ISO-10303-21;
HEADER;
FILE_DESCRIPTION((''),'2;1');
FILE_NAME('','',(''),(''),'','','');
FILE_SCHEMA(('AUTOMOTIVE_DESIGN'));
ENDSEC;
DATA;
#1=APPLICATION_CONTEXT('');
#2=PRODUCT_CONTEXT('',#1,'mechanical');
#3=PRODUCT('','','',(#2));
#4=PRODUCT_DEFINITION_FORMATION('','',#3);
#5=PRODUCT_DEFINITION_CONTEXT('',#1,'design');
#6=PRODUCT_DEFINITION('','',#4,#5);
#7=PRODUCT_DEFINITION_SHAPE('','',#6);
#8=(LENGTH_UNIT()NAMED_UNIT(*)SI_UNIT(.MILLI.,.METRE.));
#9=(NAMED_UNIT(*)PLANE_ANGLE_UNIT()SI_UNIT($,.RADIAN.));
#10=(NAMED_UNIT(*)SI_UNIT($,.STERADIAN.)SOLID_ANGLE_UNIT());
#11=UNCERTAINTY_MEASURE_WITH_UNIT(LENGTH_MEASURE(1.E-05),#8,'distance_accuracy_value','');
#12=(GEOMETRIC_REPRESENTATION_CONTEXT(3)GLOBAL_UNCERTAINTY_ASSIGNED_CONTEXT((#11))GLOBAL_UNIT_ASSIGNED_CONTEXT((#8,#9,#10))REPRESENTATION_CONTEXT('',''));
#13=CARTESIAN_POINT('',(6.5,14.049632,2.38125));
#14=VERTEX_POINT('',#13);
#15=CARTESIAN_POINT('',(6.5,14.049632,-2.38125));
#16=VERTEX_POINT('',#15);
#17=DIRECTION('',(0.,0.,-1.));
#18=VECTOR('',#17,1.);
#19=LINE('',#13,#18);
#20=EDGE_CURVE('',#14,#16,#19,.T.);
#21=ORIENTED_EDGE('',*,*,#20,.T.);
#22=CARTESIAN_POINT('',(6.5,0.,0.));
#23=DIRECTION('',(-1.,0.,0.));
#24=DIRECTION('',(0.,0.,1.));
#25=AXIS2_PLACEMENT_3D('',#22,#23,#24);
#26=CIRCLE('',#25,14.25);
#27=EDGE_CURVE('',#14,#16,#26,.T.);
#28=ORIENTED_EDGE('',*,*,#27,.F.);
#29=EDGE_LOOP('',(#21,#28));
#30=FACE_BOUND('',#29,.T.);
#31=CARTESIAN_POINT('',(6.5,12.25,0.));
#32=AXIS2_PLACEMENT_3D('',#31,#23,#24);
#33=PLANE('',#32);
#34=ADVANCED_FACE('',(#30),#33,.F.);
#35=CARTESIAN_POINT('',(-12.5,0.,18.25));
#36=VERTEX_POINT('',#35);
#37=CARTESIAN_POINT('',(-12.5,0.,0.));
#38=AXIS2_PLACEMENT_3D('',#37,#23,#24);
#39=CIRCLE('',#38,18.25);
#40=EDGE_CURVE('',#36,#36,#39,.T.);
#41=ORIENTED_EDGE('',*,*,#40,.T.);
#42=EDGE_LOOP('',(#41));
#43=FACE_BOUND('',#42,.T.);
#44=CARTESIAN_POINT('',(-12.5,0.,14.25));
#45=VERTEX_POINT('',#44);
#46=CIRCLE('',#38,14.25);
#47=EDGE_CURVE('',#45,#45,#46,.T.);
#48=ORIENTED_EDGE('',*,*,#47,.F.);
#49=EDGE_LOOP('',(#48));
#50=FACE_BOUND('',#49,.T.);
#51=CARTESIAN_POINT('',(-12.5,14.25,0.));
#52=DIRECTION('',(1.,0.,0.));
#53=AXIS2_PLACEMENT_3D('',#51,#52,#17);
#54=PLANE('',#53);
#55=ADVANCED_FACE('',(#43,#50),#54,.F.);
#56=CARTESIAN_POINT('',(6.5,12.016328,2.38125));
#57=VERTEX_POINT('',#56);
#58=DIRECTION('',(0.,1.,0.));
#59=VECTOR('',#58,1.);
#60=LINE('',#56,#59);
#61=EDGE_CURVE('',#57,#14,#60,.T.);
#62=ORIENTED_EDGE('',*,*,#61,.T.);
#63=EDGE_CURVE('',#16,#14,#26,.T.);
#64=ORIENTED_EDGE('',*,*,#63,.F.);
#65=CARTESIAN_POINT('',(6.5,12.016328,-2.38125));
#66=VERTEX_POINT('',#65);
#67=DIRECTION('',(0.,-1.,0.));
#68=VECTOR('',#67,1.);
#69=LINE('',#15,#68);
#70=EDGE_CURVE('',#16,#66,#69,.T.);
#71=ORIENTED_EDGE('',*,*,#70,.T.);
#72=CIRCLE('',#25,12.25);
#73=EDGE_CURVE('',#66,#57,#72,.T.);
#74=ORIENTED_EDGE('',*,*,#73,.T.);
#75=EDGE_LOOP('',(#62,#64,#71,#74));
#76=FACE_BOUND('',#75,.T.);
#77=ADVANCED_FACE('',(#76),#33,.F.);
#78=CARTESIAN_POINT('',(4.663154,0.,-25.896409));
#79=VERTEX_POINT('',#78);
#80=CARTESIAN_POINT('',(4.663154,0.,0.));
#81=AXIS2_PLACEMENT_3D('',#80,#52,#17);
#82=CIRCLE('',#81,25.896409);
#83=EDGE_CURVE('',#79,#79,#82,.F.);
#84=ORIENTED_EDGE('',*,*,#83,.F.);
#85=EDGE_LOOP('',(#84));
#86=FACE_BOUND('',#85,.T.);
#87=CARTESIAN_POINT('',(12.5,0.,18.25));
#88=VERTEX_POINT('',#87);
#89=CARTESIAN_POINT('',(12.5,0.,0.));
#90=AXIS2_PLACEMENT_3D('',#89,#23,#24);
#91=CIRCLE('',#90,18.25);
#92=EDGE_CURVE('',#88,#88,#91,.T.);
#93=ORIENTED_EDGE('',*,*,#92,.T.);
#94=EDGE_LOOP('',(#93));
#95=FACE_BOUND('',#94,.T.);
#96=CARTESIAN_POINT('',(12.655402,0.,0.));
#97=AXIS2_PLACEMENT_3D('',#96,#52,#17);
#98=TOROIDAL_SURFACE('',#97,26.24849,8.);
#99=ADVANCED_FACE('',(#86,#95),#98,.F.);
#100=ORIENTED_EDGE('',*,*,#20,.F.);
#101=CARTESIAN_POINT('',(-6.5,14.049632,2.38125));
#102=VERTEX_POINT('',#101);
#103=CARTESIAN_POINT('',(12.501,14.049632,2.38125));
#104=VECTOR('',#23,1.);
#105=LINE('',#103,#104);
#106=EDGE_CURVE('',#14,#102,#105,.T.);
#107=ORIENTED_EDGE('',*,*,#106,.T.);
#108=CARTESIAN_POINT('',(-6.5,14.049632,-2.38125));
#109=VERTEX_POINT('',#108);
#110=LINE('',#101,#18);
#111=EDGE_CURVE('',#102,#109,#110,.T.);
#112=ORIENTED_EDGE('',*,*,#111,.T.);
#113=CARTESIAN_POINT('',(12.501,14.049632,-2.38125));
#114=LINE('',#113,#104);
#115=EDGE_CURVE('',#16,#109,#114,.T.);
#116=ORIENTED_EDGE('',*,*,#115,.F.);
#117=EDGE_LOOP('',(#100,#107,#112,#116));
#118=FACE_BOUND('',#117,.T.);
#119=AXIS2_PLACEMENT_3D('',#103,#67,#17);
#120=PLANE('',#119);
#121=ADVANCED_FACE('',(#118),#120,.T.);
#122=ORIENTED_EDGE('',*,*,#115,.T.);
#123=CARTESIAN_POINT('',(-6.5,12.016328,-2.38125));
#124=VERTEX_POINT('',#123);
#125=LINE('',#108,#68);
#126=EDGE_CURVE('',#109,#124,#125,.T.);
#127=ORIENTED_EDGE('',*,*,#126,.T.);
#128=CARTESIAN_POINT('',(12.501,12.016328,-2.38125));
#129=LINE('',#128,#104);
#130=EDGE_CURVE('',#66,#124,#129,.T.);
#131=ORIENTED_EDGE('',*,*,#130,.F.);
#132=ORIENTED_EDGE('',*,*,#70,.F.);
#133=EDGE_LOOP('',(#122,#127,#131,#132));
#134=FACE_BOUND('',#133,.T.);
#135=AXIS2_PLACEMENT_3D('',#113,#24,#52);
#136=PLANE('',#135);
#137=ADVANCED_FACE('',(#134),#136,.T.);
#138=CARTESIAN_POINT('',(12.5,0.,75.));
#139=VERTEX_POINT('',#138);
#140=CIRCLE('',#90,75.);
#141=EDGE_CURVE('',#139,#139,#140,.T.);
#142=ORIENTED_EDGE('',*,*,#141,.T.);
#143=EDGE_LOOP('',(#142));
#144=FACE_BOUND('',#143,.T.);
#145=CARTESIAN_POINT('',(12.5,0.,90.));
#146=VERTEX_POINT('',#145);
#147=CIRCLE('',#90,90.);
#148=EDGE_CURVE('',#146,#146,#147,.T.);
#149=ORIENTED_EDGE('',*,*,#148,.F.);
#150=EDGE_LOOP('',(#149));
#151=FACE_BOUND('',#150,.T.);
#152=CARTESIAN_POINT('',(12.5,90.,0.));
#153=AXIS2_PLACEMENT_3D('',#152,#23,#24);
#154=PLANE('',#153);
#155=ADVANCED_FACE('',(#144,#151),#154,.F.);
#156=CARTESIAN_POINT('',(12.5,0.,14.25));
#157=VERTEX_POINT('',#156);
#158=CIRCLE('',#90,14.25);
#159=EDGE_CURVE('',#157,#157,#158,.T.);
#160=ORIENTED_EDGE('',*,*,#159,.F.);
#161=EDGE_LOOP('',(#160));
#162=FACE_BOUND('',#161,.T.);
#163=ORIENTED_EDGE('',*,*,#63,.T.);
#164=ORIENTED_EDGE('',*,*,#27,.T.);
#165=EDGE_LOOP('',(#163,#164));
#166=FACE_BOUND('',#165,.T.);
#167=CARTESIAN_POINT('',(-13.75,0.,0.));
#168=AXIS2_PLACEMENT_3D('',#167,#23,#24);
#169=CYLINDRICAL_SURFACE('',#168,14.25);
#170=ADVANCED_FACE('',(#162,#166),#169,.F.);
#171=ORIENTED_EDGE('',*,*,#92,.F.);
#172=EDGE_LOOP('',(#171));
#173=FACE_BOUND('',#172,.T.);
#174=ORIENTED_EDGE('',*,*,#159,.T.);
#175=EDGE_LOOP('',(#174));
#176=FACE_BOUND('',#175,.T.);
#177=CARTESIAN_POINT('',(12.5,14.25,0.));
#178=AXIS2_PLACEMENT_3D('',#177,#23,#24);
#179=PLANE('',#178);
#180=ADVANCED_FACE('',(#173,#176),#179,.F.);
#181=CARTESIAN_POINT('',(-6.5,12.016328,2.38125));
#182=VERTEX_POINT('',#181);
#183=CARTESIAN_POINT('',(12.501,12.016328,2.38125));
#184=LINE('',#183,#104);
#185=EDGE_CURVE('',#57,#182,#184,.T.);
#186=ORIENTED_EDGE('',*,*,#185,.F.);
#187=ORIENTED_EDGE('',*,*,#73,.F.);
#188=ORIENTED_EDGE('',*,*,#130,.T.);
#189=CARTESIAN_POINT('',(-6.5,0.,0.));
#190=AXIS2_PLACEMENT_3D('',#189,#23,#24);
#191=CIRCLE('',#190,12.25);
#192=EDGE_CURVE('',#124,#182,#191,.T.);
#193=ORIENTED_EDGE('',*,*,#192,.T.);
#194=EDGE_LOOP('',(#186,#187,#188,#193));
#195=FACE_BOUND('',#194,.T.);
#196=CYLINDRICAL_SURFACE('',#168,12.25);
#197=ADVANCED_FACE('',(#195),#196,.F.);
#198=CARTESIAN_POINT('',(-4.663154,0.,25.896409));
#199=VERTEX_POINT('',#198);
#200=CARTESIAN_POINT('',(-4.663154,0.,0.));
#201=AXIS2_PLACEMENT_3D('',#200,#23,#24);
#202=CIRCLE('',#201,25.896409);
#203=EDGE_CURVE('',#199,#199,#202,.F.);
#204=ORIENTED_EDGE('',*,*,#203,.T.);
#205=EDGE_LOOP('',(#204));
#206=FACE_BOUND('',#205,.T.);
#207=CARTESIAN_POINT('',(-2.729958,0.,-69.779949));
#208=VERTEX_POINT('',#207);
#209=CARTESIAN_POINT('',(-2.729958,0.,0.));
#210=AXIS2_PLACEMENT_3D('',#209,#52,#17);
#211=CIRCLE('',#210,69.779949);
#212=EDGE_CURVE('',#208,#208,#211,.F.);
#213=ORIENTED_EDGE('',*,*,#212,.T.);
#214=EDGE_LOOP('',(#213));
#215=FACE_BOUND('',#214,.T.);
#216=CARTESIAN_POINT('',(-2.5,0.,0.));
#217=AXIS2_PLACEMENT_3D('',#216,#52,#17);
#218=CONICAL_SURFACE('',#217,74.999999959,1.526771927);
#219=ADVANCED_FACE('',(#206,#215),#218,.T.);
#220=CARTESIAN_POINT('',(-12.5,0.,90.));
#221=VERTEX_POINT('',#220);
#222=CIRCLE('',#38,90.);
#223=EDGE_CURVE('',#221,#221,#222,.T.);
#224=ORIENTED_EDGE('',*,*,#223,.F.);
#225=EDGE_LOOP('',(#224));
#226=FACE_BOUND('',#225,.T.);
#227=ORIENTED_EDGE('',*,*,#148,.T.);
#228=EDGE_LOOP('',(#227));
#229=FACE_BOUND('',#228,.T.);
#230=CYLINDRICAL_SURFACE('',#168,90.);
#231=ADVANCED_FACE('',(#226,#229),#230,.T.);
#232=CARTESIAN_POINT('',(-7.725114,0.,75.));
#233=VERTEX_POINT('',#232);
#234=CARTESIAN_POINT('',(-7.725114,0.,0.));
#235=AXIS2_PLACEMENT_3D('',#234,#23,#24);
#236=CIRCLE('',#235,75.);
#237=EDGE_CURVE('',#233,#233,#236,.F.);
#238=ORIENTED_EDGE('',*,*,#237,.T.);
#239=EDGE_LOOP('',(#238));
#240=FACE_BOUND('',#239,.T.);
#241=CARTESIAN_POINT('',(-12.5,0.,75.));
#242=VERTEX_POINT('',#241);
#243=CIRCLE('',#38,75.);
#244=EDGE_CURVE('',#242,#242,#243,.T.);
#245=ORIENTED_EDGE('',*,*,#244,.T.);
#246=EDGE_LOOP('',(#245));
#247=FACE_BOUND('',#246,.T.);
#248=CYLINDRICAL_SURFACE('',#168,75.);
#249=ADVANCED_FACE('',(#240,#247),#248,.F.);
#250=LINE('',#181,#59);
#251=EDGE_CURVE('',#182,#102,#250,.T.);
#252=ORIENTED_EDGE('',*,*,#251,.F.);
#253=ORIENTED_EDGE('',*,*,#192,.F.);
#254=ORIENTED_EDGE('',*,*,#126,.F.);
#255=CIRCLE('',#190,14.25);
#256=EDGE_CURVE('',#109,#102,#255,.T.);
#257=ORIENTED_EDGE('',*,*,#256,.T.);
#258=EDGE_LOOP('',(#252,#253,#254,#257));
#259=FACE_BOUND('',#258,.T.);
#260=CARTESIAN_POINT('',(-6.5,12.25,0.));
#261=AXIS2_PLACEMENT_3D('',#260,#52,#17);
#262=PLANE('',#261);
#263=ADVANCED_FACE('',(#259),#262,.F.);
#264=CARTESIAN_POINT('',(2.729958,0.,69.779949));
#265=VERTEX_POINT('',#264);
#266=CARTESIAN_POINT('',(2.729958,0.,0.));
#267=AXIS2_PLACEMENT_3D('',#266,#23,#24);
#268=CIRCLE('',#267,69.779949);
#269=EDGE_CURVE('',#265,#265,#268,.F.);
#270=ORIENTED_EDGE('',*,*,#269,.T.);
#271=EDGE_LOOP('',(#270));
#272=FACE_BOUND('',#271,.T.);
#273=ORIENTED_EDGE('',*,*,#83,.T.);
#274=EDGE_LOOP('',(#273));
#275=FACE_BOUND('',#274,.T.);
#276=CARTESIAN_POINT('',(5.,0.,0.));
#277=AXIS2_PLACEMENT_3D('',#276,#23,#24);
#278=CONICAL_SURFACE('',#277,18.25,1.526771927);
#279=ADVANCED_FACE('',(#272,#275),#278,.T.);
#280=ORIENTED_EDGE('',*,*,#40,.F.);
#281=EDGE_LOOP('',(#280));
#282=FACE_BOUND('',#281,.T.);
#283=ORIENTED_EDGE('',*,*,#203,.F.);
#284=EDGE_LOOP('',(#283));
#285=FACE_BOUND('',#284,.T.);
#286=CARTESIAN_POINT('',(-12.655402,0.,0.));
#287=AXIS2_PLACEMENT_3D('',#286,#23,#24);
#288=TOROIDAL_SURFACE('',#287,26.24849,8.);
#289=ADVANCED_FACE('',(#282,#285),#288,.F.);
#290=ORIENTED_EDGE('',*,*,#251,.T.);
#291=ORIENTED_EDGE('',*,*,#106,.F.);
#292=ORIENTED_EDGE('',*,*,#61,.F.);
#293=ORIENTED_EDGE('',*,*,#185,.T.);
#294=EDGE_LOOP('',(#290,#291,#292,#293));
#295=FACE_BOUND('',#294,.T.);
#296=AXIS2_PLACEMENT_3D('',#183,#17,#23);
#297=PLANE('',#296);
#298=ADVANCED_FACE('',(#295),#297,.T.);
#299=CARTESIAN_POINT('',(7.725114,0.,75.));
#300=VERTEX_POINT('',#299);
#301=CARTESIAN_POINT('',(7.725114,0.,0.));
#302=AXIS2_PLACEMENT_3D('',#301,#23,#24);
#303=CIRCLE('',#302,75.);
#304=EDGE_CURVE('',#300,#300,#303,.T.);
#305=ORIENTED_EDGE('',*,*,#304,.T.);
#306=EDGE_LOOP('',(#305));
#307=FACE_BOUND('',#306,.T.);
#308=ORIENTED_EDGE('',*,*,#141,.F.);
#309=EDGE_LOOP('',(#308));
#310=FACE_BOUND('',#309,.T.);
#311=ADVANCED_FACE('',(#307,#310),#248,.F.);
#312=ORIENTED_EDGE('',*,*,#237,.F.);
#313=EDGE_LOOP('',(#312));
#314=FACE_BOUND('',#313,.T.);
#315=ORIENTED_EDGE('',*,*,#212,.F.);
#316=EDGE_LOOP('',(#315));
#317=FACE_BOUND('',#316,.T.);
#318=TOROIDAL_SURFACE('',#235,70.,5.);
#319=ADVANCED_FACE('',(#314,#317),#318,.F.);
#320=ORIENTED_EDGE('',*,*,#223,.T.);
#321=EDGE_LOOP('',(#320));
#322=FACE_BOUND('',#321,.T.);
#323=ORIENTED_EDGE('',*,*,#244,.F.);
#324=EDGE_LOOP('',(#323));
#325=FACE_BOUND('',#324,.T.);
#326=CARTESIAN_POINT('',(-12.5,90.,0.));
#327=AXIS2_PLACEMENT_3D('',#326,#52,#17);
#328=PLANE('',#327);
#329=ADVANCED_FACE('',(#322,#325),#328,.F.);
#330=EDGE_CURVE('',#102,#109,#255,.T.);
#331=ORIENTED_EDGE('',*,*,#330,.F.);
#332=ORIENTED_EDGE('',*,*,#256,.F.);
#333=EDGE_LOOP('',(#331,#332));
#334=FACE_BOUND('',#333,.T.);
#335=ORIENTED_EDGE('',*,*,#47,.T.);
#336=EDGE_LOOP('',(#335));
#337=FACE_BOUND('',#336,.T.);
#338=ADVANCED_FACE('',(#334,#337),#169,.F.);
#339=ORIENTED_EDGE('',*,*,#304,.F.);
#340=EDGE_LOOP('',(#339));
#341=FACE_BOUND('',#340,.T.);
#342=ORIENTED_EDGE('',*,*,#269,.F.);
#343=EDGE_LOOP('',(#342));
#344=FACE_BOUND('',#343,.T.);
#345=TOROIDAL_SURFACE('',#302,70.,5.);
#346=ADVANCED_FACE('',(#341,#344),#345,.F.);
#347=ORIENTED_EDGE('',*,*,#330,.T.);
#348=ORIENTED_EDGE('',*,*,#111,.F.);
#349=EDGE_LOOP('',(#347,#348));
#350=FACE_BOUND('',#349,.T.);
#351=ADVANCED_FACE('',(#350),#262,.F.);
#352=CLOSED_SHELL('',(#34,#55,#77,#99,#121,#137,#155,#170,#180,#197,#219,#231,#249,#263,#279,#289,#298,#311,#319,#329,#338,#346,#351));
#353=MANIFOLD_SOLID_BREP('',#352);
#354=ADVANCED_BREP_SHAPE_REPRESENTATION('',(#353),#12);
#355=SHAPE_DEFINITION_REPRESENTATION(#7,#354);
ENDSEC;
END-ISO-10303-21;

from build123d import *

# Parameters (mm, degrees)
FILLET1_R                      = 5
CUT_EXTRUDE1_REACH             = 129.892
CUT_EXTRUDE1_DIRECTION_2_REACH = 129.892


with BuildPart() as part:
    # Sketch1 → Revolve1 (revolve)
    with BuildSketch(Plane.XY, mode=Mode.PRIVATE) as revolve1_sk:
        Polygon((-2.5, 74.999999959), (-5, 18.25), (-12.5, 18.25), (-12.5, 14.25), (-6.5, 14.25), (-6.5, 12.25), (6.5, 12.25), (6.5, 14.25), (12.5, 14.25), (12.5, 18.25), (5, 18.25), (2.5, 74.999999959), (12.5, 74.999999959), (12.5, 89.999999959), (-12.5, 89.999999959), (-12.5, 74.999999959), align=None)
    revolve(revolve1_sk.sketch.rotate(Axis((-13.75, 0, 0), (1, 0, 0)), 90), axis=Axis((-13.75, 0, 0), (1, 0, 0)))

    # Fillet1
    fillet1_edges = [part.edges().sort_by_distance(p)[0] for p in [
        (-2.5, 0, -74.999999959),
        (2.5, 0, -74.999999959),
    ]]
    fillet(fillet1_edges, radius=FILLET1_R)

    # Fillet2: read off the stored shape, not the designer's step
    # Fillet2 outline → Fillet2 (revolve)
    with BuildSketch(Plane.YX):
        with BuildLine():
            Line((18.25, 12.5), (18.25, 4.663153786))
            Line((18.25, 4.663153786), (25.896409048, 4.663153786))
            ThreePointArc((25.896409048, 4.663153786), (20.522492538, 7.068547565), (18.25, 12.5))
        make_face()
        with BuildLine():
            Line((25.896409048, -4.663153786), (18.25, -4.663153786))
            Line((18.25, -4.663153786), (18.25, -12.5))
            ThreePointArc((18.25, -12.5), (20.522492538, -7.068547565), (25.896409048, -4.663153786))
        make_face()
    revolve(axis=Axis((0, 0, 0), (1, 0, 0)))

    # Sketch4 → Cut-Extrude1 (cut, up to next)
    with BuildSketch(Plane(origin=(0, 0, 0), x_dir=(0, 0, -1), z_dir=(1, 0, 0)), mode=Mode.PRIVATE) as cut_extrude1_sk1:
        with BuildLine():
            Line((-2.38125, 12.016328409), (-2.38125, 14.049631612))
            Line((-2.38125, 14.049631612), (2.38125, 14.049631612))
            Line((2.38125, 14.049631612), (2.38125, 12.016328409))
            ThreePointArc((2.38125, 12.016328409), (0, 12.25), (-2.38125, 12.016328409))
        make_face()
    cut_extrude1_tool1 = extrude(cut_extrude1_sk1.sketch, amount=-CUT_EXTRUDE1_REACH, mode=Mode.PRIVATE) & part.part
    add(cut_extrude1_tool1.solids().sort_by_distance((0, 13.109731, 0))[0], mode=Mode.SUBTRACT)

    # Sketch4 → Cut-Extrude1 direction 2 (cut, up to next)
    with BuildSketch(Plane(origin=(0, 0, 0), x_dir=(0, 0, -1), z_dir=(1, 0, 0)), mode=Mode.PRIVATE) as cut_extrude1_direction_2_sk1:
        with BuildLine():
            Line((-2.38125, 12.016328409), (-2.38125, 14.049631612))
            Line((-2.38125, 14.049631612), (2.38125, 14.049631612))
            Line((2.38125, 14.049631612), (2.38125, 12.016328409))
            ThreePointArc((2.38125, 12.016328409), (0, 12.25), (-2.38125, 12.016328409))
        make_face()
    cut_extrude1_direction_2_tool1 = extrude(cut_extrude1_direction_2_sk1.sketch, amount=CUT_EXTRUDE1_DIRECTION_2_REACH, mode=Mode.PRIVATE) & part.part
    add(cut_extrude1_direction_2_tool1.solids().sort_by_distance((0, 13.109731, 0))[0], mode=Mode.SUBTRACT)


solid = part.part
